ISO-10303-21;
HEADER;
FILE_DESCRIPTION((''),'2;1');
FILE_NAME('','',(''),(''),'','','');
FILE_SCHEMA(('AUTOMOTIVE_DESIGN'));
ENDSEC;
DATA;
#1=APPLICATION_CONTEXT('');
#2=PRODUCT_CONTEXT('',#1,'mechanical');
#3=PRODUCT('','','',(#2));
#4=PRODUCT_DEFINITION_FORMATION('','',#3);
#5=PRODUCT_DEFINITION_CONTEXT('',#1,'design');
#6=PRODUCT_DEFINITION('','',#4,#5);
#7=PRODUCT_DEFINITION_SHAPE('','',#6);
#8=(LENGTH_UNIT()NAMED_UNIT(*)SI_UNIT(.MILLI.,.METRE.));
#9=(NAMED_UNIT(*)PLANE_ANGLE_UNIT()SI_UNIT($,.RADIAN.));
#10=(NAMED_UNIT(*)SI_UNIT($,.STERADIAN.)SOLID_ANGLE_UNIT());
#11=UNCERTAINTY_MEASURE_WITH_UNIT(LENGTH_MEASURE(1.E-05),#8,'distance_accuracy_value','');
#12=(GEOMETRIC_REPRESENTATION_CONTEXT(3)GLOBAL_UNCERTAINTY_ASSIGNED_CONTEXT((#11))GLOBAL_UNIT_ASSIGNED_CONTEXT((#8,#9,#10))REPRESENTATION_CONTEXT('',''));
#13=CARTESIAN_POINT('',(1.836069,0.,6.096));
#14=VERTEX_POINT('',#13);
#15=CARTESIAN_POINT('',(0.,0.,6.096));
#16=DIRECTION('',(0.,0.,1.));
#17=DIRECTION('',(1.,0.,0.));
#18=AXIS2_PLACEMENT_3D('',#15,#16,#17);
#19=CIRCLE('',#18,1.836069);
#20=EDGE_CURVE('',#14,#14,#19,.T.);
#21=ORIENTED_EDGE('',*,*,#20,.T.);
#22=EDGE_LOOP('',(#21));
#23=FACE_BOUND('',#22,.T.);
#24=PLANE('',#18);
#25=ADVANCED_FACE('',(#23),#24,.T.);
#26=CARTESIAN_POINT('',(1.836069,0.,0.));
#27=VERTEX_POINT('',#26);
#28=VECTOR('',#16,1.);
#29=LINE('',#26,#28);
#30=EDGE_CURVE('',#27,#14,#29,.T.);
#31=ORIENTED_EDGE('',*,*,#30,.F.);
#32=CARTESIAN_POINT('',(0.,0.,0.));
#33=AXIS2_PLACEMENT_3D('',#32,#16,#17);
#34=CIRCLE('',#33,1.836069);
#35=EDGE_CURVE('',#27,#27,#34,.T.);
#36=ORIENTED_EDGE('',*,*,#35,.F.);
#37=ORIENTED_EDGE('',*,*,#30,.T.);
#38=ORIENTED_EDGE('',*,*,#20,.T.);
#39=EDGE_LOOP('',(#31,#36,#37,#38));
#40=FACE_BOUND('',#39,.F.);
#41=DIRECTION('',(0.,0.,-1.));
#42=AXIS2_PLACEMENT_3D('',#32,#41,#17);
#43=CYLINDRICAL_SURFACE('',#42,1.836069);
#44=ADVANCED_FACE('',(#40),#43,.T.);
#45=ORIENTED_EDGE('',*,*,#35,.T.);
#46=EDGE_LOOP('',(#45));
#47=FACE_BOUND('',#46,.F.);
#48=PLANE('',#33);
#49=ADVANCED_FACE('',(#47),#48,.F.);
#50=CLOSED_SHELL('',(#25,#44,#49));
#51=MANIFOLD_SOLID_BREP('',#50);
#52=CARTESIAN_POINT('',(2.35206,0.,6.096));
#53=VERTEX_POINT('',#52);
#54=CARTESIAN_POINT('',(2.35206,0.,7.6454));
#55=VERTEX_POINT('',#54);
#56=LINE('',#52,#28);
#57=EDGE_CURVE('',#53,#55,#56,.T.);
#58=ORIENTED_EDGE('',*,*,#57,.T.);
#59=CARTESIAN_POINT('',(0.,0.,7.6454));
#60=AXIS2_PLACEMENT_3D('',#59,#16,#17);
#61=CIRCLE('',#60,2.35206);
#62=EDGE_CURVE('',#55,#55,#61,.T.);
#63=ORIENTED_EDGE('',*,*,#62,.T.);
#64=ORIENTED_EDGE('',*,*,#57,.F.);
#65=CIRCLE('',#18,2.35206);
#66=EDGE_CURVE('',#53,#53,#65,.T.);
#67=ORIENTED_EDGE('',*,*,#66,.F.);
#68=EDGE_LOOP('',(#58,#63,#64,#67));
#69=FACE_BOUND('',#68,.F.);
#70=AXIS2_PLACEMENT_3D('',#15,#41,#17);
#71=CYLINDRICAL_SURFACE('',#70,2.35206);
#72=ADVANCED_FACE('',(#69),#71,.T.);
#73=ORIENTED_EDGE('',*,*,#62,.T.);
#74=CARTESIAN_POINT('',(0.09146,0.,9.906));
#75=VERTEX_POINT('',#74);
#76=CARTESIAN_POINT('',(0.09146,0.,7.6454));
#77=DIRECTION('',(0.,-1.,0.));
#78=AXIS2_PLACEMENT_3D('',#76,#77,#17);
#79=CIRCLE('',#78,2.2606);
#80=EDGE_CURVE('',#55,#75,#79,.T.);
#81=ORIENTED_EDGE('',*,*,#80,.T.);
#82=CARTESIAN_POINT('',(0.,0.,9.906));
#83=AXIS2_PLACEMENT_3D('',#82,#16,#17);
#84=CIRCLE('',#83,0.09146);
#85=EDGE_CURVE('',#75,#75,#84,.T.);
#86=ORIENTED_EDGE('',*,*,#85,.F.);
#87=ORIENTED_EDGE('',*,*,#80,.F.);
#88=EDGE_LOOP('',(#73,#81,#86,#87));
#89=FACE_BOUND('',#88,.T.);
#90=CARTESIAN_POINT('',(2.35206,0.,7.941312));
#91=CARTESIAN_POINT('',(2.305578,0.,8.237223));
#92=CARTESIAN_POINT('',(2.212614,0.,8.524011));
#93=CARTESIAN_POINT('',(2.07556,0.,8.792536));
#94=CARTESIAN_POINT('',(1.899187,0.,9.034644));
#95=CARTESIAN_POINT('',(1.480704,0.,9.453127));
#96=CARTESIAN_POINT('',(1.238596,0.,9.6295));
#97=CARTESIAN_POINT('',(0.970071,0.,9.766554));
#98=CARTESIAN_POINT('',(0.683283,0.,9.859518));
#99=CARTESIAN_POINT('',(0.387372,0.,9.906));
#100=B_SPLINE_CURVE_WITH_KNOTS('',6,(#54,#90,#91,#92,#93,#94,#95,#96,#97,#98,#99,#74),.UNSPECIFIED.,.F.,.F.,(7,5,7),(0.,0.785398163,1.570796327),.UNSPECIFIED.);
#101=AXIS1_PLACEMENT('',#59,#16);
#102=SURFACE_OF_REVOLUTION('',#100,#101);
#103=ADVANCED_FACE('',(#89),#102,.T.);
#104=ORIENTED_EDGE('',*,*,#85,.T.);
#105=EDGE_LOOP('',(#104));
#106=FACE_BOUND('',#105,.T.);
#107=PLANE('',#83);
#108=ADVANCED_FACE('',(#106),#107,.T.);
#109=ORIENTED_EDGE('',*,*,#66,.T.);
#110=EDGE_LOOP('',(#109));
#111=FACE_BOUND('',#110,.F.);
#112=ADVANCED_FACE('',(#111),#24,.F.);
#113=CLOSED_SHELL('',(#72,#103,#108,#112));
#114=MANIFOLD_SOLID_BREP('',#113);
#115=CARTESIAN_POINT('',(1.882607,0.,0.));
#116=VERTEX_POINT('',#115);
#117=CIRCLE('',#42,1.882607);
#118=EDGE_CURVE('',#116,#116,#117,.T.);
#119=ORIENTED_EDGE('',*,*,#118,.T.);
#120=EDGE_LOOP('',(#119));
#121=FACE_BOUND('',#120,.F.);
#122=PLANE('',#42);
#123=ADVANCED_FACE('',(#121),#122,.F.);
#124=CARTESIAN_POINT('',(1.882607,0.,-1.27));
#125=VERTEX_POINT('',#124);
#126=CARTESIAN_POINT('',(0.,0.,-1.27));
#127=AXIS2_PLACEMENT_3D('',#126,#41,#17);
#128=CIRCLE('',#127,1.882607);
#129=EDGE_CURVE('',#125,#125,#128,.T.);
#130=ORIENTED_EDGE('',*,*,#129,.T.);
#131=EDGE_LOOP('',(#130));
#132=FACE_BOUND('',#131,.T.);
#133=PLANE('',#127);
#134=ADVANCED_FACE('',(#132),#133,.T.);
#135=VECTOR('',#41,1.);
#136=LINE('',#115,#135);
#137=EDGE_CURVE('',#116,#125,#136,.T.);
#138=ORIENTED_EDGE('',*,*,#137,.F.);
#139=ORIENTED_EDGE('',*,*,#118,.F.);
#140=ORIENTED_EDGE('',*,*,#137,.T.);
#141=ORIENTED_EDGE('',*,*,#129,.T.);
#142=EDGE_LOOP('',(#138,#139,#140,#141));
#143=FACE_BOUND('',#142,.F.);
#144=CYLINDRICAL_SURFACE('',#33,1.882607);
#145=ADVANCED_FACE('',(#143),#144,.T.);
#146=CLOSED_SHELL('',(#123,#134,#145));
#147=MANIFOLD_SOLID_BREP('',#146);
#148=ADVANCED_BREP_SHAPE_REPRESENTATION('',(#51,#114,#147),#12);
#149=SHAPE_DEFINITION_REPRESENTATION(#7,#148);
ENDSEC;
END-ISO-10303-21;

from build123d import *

# Parameters (mm, degrees)
F0_R     = 1.8360694956
F1_DEPTH = 6.096
F2_R     = 2.3520596952
F2_R_2   = 1.8360694956
F3_DEPTH = 3.81
F4_R     = 2.2606
F5_R     = 1.8826071484
F5_R_2   = 1.8360694956
F6_DEPTH = 1.27


with BuildPart() as f1:
    # F0 (on Top) → F1 (new body)
    with BuildSketch(Plane.XY):
        Circle(F0_R)
    extrude(amount=F1_DEPTH)


with BuildPart() as f3:
    # F2 (on face) → F3 (new body)
    with BuildSketch(Plane.XY.offset(6.096)):
        Circle(F2_R)
        Circle(F2_R_2, mode=Mode.SUBTRACT)
        Circle(F2_R_2)
    extrude(amount=F3_DEPTH)

    # F4
    f4_edges = [f3.edges().sort_by_distance(p)[0] for p in [
        (-2.35206, 0, 9.906),
    ]]
    fillet(f4_edges, radius=F4_R)


with BuildPart() as f6:
    # F5 (on face) → F6 (new body)
    with BuildSketch(Plane(origin=(0, 0, 0), x_dir=(1, 0, 0), z_dir=(0, 0, -1))):
        Circle(F5_R)
        Circle(F5_R_2, mode=Mode.SUBTRACT)
        Circle(F5_R_2)
    extrude(amount=F6_DEPTH)


solid = Compound([f1.part, f3.part, f6.part])
